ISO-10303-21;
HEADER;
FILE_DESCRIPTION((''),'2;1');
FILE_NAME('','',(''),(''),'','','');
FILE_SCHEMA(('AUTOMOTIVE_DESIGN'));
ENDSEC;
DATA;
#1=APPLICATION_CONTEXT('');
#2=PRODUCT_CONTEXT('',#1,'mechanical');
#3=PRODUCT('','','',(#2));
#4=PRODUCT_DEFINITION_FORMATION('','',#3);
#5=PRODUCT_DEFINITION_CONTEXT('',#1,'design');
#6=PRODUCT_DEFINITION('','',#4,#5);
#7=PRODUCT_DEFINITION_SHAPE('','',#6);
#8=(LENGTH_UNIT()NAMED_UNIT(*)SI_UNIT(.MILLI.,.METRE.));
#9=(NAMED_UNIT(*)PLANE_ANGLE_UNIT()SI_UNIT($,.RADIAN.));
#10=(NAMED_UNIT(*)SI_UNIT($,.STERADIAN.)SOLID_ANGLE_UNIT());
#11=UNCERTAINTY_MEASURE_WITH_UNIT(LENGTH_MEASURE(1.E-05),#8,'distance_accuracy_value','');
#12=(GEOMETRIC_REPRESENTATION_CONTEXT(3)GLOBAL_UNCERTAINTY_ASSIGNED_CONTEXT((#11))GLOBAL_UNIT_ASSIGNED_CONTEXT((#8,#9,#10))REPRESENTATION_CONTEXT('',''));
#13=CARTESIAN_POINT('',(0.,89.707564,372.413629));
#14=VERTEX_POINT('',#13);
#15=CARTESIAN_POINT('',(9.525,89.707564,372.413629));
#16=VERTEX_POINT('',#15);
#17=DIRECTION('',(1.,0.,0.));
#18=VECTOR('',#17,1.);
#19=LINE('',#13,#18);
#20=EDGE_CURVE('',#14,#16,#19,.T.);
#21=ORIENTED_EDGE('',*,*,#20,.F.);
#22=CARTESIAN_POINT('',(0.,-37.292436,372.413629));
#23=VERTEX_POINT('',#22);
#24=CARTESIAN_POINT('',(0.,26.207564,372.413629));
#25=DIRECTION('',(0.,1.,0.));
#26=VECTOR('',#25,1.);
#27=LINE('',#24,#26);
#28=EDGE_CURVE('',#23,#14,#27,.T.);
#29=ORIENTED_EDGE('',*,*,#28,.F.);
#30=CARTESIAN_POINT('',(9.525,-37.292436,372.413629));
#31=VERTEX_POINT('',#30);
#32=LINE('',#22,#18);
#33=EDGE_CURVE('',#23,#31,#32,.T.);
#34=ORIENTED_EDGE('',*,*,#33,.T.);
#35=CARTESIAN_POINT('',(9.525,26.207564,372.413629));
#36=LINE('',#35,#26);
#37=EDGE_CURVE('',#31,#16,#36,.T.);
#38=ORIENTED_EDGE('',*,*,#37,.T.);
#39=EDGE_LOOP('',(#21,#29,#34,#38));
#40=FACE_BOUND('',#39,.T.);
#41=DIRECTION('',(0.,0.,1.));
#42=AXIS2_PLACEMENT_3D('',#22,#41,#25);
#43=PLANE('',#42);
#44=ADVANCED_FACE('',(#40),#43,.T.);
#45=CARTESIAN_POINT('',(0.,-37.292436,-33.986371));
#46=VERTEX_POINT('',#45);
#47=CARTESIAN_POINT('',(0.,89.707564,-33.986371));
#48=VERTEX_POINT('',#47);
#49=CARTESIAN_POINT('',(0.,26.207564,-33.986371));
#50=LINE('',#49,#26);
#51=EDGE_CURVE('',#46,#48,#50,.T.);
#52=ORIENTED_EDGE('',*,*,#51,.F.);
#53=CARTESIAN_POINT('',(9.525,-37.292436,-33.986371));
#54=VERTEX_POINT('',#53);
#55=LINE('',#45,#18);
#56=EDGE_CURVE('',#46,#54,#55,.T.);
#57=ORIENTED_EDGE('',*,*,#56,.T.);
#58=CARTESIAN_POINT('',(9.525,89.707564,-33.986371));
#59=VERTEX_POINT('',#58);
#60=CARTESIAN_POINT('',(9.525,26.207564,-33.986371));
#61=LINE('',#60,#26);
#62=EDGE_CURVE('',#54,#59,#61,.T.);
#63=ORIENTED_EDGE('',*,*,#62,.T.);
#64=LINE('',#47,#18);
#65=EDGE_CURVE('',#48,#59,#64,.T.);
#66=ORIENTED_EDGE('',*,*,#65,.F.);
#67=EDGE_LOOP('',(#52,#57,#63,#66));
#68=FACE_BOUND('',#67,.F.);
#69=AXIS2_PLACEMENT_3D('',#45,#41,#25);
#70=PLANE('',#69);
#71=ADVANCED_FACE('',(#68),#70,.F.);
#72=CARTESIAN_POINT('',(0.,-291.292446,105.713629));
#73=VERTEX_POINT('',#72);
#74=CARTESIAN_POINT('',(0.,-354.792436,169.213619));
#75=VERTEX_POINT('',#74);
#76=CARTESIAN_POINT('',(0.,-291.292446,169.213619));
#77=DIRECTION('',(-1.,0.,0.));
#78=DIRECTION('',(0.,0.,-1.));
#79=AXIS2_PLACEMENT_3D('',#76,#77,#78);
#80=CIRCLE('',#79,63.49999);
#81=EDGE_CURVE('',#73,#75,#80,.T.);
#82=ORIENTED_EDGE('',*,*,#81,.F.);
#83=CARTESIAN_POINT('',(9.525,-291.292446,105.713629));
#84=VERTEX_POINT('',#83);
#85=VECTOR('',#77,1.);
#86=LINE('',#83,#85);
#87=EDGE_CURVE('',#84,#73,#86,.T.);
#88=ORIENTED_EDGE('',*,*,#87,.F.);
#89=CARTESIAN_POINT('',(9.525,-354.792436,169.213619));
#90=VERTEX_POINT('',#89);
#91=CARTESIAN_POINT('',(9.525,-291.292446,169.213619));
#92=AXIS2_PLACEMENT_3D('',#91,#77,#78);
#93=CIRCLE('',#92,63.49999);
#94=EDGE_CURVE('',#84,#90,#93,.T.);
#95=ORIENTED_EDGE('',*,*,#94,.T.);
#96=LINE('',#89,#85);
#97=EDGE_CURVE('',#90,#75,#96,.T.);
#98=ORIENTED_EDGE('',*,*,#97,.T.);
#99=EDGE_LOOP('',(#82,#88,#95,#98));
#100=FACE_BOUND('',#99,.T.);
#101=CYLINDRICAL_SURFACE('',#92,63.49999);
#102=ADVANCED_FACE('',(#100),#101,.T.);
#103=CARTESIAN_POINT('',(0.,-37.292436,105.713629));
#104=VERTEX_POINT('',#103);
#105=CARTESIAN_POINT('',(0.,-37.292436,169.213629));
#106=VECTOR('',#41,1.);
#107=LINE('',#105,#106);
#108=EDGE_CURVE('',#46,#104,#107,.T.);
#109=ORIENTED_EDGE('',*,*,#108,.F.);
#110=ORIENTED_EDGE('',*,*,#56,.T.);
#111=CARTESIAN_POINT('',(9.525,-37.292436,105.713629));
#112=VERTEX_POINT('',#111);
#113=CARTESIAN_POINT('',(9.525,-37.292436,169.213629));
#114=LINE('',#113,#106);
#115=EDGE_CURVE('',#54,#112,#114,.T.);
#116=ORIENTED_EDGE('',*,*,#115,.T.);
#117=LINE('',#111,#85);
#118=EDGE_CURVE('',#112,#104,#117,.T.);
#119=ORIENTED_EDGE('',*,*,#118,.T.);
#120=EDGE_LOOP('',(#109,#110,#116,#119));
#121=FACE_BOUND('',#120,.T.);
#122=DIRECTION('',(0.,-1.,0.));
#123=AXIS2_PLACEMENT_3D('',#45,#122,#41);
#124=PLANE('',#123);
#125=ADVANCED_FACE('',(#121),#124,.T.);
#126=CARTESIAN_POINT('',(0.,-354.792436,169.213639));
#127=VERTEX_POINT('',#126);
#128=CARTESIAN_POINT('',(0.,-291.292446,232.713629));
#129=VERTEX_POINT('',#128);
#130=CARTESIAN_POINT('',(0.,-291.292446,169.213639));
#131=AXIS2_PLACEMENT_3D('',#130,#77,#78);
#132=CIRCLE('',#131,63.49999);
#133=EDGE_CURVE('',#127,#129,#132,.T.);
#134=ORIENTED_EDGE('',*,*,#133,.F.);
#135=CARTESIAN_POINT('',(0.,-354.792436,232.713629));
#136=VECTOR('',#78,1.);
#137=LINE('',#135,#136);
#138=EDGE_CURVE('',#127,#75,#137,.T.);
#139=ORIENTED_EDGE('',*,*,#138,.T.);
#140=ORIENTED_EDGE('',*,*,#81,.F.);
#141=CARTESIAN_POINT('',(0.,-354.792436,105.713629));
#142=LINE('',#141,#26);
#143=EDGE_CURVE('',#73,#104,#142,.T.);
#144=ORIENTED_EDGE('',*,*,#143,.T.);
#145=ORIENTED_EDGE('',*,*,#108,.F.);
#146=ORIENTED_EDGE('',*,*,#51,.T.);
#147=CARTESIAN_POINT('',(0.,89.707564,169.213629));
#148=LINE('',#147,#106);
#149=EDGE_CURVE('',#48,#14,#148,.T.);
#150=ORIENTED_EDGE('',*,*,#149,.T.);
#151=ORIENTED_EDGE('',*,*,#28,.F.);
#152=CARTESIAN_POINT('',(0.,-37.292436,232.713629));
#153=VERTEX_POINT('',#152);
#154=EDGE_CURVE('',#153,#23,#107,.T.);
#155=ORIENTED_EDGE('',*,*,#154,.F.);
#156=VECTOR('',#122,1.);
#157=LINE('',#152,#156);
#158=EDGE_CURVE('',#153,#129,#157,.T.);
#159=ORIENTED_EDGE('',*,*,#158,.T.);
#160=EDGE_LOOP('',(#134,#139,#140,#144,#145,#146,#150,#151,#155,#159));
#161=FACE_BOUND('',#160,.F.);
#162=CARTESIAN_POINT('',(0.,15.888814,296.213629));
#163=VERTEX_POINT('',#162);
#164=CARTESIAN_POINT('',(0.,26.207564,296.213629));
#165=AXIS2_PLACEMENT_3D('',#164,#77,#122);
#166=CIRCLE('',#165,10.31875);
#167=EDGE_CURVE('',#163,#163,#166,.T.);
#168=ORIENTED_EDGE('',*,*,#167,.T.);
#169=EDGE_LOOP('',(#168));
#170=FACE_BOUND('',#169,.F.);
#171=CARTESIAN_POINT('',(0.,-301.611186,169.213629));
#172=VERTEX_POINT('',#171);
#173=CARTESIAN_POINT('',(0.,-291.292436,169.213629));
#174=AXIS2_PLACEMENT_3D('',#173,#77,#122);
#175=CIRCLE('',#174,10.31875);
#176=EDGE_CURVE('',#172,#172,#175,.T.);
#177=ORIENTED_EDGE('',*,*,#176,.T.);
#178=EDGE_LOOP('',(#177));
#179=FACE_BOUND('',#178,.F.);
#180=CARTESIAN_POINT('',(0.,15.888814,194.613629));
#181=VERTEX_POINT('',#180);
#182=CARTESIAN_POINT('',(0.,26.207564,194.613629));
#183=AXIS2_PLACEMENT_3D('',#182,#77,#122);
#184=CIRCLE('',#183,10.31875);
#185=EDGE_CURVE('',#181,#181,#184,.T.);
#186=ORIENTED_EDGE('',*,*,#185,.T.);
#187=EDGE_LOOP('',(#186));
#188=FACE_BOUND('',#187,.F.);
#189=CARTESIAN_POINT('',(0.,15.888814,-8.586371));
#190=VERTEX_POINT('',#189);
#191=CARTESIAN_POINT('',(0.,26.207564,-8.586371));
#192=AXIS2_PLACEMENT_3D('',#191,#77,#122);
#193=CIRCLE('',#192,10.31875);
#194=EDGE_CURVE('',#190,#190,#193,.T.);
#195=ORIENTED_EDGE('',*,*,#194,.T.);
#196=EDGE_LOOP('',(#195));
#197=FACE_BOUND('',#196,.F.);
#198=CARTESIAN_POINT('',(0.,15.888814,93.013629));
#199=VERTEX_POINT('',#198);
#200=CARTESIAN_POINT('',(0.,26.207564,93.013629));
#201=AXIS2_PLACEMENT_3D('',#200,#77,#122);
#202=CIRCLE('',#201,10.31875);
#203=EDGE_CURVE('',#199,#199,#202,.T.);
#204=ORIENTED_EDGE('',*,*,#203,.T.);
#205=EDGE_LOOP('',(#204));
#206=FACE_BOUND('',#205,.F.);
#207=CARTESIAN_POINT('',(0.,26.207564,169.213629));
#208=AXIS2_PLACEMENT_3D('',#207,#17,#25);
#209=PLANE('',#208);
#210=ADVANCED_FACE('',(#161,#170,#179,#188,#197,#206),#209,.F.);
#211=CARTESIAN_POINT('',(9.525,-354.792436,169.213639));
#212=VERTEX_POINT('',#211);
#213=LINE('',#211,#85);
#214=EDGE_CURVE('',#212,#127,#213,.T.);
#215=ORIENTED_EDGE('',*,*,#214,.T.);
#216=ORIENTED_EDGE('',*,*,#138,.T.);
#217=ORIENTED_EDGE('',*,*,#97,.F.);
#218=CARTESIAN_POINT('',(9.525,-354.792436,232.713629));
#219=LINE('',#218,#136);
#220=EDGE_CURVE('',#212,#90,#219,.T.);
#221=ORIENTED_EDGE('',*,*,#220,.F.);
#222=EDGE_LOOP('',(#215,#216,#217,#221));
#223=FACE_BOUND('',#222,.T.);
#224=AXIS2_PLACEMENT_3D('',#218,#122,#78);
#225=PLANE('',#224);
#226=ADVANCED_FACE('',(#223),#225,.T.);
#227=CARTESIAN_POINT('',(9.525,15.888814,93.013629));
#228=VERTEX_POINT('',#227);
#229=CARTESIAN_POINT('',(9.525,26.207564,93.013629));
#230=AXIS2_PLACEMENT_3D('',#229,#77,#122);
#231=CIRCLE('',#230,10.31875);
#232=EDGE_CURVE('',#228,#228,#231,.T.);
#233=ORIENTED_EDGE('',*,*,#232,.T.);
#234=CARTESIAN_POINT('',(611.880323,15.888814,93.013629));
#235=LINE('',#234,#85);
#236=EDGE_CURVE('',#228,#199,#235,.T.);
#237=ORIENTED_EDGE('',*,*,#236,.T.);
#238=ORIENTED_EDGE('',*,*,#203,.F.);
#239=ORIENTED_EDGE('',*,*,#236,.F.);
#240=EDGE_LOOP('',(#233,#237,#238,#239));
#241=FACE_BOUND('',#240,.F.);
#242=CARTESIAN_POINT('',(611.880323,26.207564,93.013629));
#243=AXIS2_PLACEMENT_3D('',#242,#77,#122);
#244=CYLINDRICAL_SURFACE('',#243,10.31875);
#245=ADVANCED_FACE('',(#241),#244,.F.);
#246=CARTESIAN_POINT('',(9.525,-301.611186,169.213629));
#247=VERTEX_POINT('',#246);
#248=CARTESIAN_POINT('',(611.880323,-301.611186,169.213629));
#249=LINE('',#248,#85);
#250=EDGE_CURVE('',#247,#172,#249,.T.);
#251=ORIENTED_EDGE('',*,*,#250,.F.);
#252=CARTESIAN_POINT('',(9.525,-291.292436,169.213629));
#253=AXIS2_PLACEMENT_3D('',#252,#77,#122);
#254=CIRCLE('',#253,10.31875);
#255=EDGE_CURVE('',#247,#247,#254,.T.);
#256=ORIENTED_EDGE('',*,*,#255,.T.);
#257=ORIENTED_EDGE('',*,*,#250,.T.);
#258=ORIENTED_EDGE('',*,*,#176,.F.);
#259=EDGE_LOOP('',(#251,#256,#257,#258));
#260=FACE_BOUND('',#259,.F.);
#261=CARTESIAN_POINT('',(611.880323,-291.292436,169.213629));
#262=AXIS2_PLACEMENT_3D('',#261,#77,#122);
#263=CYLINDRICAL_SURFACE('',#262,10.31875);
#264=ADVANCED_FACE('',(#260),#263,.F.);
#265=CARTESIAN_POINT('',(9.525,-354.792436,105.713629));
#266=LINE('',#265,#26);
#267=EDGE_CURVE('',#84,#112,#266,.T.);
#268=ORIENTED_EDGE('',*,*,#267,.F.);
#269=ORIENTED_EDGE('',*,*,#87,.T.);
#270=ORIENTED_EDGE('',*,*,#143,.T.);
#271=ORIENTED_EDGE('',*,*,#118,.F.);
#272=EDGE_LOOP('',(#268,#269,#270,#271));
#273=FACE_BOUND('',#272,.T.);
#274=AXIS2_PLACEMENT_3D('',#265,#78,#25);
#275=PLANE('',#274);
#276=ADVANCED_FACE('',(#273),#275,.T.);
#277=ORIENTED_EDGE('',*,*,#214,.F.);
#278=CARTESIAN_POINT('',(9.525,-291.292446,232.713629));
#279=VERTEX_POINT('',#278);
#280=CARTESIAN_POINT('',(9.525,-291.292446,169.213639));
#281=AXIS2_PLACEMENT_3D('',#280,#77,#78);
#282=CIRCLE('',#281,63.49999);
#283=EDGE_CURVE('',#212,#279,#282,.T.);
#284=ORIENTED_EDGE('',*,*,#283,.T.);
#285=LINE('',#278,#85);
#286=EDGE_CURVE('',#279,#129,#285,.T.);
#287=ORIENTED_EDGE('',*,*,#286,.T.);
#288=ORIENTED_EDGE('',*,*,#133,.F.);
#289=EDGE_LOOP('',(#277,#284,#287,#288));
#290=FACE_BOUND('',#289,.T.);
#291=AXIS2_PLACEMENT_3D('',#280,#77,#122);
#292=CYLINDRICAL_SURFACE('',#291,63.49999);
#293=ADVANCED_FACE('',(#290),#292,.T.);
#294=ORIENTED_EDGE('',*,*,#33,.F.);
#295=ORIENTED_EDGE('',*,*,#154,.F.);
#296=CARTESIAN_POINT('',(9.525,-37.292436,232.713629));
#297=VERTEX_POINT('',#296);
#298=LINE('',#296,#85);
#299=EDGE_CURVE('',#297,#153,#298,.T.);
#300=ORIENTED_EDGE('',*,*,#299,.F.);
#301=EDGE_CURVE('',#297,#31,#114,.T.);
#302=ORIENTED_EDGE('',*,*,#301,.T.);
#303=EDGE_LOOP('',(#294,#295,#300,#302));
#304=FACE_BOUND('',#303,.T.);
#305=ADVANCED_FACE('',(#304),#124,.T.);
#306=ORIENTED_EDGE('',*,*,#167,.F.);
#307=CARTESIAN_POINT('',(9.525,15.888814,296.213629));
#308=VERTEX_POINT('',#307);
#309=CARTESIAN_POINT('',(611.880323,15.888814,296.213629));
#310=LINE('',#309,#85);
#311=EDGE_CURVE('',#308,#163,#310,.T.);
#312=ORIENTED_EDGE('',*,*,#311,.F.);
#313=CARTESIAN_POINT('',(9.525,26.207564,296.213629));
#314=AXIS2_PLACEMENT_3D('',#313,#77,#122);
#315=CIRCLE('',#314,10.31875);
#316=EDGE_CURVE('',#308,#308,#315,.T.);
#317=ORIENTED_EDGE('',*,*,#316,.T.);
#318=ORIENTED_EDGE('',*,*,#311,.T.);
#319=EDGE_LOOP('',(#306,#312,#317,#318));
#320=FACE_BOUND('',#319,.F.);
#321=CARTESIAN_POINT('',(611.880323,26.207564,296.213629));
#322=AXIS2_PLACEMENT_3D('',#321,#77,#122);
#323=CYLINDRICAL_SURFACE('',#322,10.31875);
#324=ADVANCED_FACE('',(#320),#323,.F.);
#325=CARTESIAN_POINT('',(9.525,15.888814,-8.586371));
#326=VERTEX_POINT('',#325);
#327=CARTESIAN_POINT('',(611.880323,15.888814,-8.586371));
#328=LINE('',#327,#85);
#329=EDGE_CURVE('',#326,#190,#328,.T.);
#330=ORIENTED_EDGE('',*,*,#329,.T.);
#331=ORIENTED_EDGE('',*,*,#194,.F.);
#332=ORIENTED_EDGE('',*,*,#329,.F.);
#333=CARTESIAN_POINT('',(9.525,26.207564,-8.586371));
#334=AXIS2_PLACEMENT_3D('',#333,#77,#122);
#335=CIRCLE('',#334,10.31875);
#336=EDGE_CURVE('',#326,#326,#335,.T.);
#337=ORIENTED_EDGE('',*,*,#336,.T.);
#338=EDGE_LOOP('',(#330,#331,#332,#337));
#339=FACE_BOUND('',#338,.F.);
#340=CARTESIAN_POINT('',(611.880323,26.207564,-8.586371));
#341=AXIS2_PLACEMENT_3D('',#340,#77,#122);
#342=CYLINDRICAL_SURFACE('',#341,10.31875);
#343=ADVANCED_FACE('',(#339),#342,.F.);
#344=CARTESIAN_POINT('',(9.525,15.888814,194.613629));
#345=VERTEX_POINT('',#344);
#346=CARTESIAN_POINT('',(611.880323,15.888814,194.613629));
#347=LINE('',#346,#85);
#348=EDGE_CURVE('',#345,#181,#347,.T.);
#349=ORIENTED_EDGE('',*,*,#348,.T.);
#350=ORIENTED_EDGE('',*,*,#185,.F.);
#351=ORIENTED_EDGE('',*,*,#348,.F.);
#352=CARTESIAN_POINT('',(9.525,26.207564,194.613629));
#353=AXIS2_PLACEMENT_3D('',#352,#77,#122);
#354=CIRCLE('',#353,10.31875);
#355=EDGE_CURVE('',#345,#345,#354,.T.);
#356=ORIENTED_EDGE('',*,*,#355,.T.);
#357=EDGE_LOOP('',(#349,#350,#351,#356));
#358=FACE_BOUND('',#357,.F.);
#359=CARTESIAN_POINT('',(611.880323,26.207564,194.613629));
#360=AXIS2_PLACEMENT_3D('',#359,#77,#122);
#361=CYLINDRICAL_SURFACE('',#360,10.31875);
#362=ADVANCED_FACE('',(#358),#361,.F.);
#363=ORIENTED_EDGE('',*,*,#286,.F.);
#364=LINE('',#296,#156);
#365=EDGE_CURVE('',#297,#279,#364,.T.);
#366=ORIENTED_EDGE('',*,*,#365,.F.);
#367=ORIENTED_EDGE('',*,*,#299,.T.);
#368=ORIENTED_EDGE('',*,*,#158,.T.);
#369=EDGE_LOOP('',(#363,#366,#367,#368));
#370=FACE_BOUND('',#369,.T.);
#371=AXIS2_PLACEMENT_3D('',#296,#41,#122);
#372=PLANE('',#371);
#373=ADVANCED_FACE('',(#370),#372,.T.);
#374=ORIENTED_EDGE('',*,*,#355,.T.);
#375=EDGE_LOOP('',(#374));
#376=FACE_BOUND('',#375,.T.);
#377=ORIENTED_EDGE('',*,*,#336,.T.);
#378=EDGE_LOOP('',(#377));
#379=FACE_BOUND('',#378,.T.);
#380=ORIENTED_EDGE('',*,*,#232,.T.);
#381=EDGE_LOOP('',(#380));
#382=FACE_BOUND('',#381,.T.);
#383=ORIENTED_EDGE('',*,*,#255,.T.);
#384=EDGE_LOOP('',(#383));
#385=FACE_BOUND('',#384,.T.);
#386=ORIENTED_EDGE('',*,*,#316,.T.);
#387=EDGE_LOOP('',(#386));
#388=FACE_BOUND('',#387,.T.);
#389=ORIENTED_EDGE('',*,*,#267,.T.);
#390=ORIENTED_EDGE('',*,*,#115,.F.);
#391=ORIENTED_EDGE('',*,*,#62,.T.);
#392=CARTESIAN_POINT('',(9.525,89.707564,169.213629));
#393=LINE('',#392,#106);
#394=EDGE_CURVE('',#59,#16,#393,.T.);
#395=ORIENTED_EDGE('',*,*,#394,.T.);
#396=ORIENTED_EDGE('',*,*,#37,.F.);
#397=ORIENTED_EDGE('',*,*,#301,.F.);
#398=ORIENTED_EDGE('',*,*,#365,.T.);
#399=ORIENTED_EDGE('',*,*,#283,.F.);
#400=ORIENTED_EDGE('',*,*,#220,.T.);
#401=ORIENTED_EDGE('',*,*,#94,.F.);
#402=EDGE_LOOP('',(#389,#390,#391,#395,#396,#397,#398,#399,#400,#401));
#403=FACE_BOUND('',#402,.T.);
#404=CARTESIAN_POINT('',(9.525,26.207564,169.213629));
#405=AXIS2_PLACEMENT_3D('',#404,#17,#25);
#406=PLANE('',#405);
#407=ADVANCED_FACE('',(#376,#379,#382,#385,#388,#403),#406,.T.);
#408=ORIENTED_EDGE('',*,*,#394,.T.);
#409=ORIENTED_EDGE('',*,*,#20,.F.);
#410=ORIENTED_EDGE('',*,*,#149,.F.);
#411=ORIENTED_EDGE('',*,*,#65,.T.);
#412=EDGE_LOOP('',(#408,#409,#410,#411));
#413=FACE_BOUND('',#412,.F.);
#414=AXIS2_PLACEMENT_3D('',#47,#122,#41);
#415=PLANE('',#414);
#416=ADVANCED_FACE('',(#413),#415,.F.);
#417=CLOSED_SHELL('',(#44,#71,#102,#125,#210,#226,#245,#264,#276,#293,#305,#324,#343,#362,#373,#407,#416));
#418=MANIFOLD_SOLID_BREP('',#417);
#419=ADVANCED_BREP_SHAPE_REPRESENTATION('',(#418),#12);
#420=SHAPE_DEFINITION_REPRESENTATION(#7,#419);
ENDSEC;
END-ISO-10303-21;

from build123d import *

# Parameters (mm, degrees)
F0_W     = 127
F0_H     = 406.4
F1_DEPTH = 9.525
F3_DEPTH = 9.525
F4_R     = 63.49999
F6_D     = 20.6375
F8_D     = 20.6375


# Not quite as in the source:
# - a fillet or chamfer is up to 0.001 mm smaller than in the source, because OpenCascade refuses the exact size
# - a length typed as a fraction of an inch, garbled in the dataset ("3 / 203.2 mm" for 3/8 in), is restored


with BuildPart() as f1:
    # F0 (on Right) → F1 (new body)
    with BuildSketch(Plane.YZ):
        with Locations((26.2075642347, 169.2136289895)):
            Rectangle(F0_W, F0_H)
    extrude(amount=F1_DEPTH)

    # F2 (on face) → F3 (join)
    with BuildSketch(Plane.YZ.offset(9.525)):
        Polygon((-37.2924357653, 105.7136289895), (-37.2924357653, 169.2136289895), (-37.2924357653, 232.7136289895), (-354.7924357653, 232.7136289895), (-354.7924357653, 105.7136289895), align=None)
    extrude(amount=-F3_DEPTH)

    # F4 (radius 63.5 in the source; OpenCascade refuses exactly that, so slightly less here)
    f4_edges = [f1.edges().sort_by_distance(p)[0] for p in [
        (4.7625, -354.792436, 232.713629),
        (4.7625, -354.792436, 105.713629),
    ]]
    fillet(f4_edges, radius=F4_R)

    # F6 (through all)
    with Locations(Plane.YZ.offset(9.525)):
        with Locations((-291.2924357653, 169.2136289895)):
            Hole(F6_D / 2)

    # F8 (through all)
    with Locations(Plane.YZ.offset(9.525)):
        with Locations((26.2075642347, 296.2136289895), (26.2075642347, 194.6136289895), (26.2075642347, 93.0136289895), (26.2075642347, -8.5863710105)):
            Hole(F8_D / 2)


solid = f1.part
